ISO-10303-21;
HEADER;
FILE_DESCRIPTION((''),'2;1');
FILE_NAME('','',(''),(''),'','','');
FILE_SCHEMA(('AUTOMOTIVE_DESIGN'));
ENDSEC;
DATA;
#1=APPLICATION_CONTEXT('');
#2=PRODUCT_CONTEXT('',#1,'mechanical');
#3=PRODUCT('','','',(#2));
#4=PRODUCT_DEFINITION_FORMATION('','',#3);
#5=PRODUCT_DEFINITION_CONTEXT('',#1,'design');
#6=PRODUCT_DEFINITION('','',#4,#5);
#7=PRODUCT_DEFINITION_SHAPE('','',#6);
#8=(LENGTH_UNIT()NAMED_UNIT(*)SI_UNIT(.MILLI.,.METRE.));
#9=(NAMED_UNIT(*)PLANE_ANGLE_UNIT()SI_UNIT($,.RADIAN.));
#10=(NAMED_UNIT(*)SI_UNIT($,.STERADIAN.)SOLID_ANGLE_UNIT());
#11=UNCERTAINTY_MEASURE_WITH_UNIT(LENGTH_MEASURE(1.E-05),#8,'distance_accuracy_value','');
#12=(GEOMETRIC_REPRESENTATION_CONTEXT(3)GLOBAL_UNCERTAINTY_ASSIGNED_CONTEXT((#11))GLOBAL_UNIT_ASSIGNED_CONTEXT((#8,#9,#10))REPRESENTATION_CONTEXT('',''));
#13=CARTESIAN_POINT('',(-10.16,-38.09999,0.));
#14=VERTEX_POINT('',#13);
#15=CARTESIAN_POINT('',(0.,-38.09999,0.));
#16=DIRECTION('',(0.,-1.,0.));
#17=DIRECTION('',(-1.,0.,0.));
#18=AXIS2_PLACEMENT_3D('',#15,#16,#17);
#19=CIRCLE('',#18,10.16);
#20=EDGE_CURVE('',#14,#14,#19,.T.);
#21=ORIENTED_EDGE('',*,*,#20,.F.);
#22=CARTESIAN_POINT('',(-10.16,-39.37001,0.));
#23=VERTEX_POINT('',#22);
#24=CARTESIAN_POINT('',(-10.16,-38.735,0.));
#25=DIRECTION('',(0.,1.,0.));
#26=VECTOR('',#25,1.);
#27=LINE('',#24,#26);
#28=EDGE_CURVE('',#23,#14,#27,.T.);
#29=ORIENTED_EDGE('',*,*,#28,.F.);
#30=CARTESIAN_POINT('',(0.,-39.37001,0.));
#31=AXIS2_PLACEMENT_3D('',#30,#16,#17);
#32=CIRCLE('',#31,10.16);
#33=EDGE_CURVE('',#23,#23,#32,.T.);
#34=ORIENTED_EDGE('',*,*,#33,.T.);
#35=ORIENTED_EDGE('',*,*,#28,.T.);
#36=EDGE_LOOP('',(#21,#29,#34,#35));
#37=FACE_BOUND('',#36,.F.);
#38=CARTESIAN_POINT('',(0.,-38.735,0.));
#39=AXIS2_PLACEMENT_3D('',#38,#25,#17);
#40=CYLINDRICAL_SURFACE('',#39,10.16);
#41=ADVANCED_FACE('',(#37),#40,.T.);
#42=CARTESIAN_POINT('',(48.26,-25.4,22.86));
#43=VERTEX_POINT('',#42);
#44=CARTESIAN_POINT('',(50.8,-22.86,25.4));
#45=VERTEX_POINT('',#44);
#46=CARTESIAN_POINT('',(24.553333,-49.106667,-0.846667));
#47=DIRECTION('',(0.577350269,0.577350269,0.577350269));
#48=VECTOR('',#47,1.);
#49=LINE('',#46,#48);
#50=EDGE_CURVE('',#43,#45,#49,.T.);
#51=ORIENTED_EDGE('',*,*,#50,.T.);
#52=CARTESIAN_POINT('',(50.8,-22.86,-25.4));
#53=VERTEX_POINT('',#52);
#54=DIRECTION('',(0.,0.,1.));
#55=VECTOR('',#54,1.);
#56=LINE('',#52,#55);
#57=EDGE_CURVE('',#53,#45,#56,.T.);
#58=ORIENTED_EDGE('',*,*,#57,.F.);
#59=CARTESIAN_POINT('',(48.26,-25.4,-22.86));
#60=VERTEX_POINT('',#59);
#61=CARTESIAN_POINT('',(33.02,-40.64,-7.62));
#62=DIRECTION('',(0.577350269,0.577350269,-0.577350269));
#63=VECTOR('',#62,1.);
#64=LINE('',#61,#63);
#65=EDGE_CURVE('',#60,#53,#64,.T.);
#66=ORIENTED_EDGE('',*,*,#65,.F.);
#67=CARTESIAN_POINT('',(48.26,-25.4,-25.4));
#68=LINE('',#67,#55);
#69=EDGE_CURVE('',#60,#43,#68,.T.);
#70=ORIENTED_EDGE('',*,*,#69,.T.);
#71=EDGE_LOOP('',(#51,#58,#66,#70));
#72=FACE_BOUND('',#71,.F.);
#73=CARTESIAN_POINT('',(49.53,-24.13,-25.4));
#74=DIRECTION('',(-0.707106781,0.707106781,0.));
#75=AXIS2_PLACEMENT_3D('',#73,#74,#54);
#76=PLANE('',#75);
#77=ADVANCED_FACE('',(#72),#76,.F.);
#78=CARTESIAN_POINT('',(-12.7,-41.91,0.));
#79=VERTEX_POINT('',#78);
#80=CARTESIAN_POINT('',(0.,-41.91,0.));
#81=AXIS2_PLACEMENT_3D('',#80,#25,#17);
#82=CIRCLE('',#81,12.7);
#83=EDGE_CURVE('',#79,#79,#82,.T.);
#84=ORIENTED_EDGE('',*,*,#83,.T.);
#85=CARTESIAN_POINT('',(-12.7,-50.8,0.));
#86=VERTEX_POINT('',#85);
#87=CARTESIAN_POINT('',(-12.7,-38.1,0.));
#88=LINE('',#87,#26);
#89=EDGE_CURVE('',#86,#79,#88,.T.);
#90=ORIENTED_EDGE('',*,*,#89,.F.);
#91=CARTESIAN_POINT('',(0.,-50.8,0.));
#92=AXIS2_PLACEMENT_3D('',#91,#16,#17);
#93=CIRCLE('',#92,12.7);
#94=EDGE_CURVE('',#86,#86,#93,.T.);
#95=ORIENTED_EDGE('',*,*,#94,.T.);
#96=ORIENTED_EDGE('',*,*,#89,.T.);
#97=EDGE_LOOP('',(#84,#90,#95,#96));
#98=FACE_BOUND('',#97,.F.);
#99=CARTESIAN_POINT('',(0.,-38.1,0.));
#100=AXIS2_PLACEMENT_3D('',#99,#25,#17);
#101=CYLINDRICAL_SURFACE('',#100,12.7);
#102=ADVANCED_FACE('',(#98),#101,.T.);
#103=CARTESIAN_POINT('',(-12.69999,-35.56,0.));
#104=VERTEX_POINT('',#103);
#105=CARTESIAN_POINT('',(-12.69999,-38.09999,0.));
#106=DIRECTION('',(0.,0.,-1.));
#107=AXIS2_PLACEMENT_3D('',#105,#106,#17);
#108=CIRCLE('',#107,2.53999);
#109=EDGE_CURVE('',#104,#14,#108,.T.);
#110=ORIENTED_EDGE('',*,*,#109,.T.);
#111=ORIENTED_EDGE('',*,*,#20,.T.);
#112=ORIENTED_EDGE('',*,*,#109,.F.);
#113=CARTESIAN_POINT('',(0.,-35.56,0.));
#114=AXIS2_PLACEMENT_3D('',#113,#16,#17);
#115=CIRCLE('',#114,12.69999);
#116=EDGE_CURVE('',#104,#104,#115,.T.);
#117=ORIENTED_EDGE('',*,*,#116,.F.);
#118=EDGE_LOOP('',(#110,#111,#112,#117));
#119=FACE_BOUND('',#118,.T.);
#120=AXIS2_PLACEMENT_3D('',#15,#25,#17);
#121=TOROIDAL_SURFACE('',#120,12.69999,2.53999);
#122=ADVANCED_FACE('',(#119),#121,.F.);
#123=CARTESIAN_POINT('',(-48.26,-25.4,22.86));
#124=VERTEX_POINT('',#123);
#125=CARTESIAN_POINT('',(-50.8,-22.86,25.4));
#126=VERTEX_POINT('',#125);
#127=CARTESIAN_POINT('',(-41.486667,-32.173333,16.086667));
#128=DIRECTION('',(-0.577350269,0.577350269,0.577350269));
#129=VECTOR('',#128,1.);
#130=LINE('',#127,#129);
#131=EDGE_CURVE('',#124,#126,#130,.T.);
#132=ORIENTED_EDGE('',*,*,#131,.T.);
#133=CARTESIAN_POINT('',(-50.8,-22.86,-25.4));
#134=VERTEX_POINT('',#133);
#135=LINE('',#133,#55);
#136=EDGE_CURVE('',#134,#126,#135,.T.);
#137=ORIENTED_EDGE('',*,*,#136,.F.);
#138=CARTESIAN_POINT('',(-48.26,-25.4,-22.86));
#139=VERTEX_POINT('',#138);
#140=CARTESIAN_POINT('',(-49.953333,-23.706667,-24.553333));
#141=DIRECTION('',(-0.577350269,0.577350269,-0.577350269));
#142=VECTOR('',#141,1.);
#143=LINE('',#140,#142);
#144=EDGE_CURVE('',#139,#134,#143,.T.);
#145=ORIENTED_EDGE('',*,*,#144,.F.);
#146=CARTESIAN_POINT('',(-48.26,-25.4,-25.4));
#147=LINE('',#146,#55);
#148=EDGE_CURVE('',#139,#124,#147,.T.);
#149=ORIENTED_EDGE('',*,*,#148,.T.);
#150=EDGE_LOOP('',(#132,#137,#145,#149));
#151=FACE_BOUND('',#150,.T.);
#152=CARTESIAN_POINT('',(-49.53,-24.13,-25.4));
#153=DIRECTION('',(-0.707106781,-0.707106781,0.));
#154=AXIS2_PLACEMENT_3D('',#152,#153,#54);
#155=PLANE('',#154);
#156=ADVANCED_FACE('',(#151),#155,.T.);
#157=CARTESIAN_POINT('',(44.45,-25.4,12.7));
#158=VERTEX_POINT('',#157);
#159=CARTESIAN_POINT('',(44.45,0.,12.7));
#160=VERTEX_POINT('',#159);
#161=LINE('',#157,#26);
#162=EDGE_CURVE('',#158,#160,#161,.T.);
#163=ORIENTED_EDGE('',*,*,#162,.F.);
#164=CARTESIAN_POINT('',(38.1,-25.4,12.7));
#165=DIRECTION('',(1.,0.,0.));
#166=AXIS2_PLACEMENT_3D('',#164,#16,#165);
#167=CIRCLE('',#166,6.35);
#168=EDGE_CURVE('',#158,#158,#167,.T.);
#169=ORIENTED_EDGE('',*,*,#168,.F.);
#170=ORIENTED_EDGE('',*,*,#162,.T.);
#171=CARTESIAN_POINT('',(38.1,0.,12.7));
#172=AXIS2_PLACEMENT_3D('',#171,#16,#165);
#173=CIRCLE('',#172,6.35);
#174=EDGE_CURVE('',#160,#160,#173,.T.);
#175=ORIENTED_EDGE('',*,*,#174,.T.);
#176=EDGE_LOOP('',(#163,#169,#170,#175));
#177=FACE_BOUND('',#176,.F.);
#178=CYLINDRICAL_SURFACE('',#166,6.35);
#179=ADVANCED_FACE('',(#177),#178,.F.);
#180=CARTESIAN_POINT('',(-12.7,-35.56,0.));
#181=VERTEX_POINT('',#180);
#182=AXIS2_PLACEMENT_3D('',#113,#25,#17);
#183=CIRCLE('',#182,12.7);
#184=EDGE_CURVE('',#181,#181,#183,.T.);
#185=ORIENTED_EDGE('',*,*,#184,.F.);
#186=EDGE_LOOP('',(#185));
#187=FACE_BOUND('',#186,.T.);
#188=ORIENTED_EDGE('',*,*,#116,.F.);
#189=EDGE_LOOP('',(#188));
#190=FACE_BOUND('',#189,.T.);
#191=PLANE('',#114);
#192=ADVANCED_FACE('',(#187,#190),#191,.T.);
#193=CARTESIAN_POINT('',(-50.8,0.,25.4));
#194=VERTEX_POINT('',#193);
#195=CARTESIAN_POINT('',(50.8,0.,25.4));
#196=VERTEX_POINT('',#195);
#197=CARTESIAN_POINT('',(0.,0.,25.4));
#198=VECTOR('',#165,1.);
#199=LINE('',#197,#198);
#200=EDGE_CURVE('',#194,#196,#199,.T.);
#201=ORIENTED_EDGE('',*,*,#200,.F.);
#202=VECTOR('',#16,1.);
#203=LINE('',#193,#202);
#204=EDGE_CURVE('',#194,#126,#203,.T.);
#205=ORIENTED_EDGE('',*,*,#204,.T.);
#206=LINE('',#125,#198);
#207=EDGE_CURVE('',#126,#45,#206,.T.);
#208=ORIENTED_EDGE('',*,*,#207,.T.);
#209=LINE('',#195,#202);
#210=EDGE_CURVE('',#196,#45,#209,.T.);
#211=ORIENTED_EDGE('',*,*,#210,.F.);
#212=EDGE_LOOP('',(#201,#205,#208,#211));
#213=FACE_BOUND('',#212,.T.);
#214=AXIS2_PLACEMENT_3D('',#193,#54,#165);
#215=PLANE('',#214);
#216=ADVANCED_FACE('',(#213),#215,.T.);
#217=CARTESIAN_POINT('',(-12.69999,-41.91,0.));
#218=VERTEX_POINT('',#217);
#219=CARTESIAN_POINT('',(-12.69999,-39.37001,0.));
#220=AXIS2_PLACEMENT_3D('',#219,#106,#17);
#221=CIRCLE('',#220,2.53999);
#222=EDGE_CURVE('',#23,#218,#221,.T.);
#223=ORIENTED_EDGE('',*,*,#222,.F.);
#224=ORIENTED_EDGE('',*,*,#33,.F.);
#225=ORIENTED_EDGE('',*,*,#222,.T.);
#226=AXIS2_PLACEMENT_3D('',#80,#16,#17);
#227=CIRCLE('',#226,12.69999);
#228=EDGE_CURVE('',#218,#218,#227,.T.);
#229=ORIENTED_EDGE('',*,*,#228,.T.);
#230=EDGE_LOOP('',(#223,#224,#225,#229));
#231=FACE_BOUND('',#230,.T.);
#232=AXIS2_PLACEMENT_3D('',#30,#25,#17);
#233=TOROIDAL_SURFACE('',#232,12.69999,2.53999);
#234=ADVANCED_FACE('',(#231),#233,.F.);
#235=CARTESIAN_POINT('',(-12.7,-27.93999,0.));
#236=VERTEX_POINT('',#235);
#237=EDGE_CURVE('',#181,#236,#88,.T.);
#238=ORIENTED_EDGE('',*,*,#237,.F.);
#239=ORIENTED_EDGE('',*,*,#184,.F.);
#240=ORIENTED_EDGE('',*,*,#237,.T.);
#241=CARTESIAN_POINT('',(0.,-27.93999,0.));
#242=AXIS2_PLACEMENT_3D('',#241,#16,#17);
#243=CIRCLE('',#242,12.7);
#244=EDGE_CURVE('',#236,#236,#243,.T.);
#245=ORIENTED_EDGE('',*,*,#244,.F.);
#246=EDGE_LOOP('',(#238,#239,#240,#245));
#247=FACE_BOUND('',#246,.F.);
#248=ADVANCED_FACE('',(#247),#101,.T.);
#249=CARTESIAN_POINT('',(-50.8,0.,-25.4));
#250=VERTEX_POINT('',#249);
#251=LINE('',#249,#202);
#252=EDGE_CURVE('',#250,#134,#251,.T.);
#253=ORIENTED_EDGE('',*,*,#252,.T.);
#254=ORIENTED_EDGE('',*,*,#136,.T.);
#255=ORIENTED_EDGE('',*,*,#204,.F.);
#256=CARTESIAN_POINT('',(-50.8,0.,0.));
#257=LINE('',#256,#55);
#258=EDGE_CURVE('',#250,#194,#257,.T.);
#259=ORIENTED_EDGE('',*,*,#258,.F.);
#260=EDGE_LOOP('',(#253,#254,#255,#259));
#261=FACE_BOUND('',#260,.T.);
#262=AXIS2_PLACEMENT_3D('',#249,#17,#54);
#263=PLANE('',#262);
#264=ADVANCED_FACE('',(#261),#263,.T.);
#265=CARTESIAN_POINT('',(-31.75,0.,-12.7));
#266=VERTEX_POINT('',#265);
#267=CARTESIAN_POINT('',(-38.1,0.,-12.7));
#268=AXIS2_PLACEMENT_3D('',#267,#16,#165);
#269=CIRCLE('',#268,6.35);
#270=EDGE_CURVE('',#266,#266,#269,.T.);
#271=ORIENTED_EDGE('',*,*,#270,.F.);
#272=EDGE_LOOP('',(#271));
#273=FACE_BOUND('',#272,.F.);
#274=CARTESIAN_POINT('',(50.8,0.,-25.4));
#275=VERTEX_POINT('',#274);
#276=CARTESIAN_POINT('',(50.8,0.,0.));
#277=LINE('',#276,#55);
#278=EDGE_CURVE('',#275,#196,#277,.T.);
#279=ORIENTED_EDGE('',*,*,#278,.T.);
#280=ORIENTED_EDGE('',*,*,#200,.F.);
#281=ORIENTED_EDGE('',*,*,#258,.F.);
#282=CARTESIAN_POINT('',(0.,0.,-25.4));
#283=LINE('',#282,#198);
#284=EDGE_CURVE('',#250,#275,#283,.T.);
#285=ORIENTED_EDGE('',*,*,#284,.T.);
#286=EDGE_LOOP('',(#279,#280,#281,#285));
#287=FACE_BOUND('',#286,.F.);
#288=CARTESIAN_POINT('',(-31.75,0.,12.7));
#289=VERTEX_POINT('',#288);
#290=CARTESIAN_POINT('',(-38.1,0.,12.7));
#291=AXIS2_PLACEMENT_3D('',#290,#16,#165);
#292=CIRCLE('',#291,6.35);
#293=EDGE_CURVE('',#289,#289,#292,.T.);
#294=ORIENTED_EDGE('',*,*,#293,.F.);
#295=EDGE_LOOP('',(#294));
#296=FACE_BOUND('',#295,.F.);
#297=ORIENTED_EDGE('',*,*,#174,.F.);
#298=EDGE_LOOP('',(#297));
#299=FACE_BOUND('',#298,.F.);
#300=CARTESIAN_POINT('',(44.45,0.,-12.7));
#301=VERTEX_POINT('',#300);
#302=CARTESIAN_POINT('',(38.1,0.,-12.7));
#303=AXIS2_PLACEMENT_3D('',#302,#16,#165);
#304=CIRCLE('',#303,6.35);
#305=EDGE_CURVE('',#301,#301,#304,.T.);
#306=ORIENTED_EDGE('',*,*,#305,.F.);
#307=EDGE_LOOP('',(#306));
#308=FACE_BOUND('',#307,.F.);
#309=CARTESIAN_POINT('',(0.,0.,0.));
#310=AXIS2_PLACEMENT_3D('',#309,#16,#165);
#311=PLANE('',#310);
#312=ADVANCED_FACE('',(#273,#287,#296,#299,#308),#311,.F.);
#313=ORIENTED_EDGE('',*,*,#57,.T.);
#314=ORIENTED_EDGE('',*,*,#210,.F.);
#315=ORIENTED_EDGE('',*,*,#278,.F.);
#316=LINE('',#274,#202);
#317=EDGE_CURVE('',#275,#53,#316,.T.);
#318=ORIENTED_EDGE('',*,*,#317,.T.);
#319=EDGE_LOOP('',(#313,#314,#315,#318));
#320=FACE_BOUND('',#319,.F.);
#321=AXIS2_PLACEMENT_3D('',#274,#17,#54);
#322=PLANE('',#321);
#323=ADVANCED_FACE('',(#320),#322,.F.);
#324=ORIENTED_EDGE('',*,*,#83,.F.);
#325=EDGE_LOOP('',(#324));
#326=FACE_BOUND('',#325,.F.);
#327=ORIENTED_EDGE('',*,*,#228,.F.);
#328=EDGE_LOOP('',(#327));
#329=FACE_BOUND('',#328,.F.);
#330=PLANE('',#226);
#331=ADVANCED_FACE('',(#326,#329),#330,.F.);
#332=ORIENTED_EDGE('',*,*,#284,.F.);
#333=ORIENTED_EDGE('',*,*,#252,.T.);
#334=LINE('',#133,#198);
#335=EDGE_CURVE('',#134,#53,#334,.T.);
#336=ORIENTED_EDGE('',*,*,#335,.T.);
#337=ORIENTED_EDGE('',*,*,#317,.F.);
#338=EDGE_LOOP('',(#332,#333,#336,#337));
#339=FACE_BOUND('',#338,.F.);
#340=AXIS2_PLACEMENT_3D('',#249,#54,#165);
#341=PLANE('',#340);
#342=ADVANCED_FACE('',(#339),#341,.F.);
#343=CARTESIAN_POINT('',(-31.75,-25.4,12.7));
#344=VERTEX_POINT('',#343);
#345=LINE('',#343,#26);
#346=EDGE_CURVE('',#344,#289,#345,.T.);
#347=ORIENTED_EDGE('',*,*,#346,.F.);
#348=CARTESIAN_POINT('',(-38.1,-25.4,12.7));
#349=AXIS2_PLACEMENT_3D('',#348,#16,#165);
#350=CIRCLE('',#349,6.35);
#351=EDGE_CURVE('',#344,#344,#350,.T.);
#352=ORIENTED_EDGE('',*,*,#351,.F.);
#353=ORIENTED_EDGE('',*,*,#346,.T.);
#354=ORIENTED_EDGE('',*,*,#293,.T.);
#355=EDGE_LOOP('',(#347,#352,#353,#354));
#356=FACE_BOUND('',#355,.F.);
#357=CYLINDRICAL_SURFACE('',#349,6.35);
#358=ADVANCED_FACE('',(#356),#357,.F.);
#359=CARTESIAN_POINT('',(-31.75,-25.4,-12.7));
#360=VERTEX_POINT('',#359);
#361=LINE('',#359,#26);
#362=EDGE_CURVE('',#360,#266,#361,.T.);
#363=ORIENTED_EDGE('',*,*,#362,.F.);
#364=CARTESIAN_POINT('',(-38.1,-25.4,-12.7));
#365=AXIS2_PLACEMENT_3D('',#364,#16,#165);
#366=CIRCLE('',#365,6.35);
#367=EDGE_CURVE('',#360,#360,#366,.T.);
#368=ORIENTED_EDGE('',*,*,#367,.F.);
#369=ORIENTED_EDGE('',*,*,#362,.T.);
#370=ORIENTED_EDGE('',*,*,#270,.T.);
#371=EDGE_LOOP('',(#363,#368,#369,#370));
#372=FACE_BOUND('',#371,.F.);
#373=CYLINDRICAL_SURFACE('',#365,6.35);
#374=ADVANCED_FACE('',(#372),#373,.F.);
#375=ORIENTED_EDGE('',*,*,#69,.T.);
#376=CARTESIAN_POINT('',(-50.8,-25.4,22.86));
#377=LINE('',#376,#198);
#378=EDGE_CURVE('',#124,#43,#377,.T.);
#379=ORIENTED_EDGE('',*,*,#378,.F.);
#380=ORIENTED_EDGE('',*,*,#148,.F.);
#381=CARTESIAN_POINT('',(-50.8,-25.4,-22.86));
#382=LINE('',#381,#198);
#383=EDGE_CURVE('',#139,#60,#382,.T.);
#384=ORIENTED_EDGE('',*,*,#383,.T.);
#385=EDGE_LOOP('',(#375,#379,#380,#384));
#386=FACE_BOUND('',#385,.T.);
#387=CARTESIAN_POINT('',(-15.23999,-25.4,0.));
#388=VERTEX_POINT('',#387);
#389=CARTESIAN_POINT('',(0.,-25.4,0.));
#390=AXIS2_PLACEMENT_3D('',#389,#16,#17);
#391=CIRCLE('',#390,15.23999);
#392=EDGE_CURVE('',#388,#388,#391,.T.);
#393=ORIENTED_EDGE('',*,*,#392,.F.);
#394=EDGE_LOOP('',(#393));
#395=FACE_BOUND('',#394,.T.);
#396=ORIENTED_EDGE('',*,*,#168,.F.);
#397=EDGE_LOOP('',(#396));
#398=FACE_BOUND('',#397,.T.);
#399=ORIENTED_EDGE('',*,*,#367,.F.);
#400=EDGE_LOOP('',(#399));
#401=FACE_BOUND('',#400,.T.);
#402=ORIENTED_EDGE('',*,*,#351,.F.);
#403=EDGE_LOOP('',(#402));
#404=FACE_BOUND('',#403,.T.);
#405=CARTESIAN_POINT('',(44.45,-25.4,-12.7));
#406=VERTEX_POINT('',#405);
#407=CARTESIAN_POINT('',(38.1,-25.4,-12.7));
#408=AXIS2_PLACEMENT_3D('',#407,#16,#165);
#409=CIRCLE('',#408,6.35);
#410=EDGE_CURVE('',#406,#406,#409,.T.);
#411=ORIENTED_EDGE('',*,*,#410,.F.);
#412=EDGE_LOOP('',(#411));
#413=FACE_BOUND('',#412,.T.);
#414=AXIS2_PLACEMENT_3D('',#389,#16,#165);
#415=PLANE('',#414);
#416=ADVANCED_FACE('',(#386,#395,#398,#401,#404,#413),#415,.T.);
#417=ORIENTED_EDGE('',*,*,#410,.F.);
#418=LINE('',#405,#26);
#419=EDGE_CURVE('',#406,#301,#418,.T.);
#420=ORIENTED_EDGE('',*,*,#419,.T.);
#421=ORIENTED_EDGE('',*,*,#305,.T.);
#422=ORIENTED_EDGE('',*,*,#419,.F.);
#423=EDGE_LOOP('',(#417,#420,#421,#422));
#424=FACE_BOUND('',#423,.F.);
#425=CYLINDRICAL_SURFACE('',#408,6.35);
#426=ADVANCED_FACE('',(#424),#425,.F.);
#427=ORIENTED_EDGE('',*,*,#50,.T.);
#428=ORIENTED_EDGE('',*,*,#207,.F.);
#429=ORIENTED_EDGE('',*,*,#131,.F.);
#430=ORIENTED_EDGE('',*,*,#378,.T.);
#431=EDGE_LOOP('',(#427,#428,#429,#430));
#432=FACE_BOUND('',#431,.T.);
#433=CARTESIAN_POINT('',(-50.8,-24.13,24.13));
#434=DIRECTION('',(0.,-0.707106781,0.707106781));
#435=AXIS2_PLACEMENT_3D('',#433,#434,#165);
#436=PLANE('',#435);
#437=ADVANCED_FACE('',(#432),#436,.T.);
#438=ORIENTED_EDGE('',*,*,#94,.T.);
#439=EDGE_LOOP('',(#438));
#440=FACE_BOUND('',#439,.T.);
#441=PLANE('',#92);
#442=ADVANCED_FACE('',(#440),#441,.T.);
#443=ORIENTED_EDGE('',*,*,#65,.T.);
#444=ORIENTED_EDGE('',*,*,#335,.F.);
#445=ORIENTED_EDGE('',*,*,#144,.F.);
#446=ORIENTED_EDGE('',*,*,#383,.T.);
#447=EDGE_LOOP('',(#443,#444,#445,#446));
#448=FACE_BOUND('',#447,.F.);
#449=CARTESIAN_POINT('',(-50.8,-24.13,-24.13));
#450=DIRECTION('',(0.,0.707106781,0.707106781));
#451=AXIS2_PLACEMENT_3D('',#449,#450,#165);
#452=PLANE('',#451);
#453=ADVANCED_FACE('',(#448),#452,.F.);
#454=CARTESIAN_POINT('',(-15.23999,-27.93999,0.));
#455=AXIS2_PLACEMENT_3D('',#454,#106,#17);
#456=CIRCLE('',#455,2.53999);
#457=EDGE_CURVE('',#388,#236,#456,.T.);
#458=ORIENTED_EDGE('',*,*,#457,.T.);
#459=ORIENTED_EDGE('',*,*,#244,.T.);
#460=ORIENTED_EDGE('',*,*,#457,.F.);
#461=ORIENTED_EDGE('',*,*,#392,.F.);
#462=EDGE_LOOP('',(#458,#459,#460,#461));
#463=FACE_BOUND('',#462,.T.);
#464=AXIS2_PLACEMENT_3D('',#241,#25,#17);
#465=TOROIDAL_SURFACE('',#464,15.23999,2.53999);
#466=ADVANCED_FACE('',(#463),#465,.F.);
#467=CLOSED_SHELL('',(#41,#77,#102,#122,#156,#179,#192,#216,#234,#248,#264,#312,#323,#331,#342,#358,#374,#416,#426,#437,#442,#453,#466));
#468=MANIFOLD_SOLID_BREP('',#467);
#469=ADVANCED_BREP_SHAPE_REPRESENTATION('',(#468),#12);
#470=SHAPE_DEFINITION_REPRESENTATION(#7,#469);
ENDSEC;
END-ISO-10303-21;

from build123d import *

# Parameters (mm, degrees)
F0_W     = 101.6
F0_H     = 50.8
F1_DEPTH = 25.4
F2_R     = 6.35
F3_DEPTH = 25.401
F4_W     = 12.7
F4_H     = 25.4
F6_W     = 10.16
F6_H     = 6.35
F8_R     = 2.53999
F9_SIZE  = 2.54


# Not quite as in the source:
# - a fillet or chamfer is up to 0.001 mm smaller than in the source, because OpenCascade refuses the exact size


with BuildPart() as f1:
    # F0 (on Front) → F1 (new body)
    with BuildSketch(Plane.XZ):
        Rectangle(F0_W, F0_H)
    extrude(amount=F1_DEPTH)

    # F2 (on face) → F3 (cut, through all)
    with BuildSketch(Plane.XZ.offset(25.4)):
        with Locations((-38.1, 12.7)):
            Circle(F2_R)
        with Locations((-38.1, -12.7)):
            Circle(F2_R)
        with Locations((38.1, 12.7)):
            Circle(F2_R)
        with Locations((38.1, -12.7)):
            Circle(F2_R)
    extrude(amount=-F3_DEPTH, mode=Mode.SUBTRACT)

    # F4 (on Top) → F5 (revolve)
    with BuildSketch(Plane.XY):
        with Locations((-6.35, -38.1)):
            Rectangle(F4_W, F4_H)
    revolve(axis=Axis((0, -38.1, 0), (0, -1, 0)))

    # F6 (on Top) → F7 (revolve, cut)
    with BuildSketch(Plane.XY):
        with Locations((-15.24, -38.735)):
            Rectangle(F6_W, F6_H)
    revolve(axis=Axis((0, -57.4092715979, 0), (0, -1, 0)), mode=Mode.SUBTRACT)

    # F8 (radius 2.54 in the source; OpenCascade refuses exactly that, so slightly less here)
    f8_edges = [f1.edges().sort_by_distance(p)[0] for p in [
        (12.7, -25.4, 0),
        (10.16, -35.56, 0),
        (10.16, -41.91, 0),
        (-10.16, -38.735, 0),
    ]]
    fillet(f8_edges, radius=F8_R)

    # F9
    f9_edges = [f1.edges().sort_by_distance(p)[0] for p in [
        (-50.8, -25.4, 0),
        (0, -25.4, 25.4),
        (50.8, -25.4, 0),
        (0, -25.4, -25.4),
    ]]
    chamfer(f9_edges, length=F9_SIZE)


solid = f1.part
